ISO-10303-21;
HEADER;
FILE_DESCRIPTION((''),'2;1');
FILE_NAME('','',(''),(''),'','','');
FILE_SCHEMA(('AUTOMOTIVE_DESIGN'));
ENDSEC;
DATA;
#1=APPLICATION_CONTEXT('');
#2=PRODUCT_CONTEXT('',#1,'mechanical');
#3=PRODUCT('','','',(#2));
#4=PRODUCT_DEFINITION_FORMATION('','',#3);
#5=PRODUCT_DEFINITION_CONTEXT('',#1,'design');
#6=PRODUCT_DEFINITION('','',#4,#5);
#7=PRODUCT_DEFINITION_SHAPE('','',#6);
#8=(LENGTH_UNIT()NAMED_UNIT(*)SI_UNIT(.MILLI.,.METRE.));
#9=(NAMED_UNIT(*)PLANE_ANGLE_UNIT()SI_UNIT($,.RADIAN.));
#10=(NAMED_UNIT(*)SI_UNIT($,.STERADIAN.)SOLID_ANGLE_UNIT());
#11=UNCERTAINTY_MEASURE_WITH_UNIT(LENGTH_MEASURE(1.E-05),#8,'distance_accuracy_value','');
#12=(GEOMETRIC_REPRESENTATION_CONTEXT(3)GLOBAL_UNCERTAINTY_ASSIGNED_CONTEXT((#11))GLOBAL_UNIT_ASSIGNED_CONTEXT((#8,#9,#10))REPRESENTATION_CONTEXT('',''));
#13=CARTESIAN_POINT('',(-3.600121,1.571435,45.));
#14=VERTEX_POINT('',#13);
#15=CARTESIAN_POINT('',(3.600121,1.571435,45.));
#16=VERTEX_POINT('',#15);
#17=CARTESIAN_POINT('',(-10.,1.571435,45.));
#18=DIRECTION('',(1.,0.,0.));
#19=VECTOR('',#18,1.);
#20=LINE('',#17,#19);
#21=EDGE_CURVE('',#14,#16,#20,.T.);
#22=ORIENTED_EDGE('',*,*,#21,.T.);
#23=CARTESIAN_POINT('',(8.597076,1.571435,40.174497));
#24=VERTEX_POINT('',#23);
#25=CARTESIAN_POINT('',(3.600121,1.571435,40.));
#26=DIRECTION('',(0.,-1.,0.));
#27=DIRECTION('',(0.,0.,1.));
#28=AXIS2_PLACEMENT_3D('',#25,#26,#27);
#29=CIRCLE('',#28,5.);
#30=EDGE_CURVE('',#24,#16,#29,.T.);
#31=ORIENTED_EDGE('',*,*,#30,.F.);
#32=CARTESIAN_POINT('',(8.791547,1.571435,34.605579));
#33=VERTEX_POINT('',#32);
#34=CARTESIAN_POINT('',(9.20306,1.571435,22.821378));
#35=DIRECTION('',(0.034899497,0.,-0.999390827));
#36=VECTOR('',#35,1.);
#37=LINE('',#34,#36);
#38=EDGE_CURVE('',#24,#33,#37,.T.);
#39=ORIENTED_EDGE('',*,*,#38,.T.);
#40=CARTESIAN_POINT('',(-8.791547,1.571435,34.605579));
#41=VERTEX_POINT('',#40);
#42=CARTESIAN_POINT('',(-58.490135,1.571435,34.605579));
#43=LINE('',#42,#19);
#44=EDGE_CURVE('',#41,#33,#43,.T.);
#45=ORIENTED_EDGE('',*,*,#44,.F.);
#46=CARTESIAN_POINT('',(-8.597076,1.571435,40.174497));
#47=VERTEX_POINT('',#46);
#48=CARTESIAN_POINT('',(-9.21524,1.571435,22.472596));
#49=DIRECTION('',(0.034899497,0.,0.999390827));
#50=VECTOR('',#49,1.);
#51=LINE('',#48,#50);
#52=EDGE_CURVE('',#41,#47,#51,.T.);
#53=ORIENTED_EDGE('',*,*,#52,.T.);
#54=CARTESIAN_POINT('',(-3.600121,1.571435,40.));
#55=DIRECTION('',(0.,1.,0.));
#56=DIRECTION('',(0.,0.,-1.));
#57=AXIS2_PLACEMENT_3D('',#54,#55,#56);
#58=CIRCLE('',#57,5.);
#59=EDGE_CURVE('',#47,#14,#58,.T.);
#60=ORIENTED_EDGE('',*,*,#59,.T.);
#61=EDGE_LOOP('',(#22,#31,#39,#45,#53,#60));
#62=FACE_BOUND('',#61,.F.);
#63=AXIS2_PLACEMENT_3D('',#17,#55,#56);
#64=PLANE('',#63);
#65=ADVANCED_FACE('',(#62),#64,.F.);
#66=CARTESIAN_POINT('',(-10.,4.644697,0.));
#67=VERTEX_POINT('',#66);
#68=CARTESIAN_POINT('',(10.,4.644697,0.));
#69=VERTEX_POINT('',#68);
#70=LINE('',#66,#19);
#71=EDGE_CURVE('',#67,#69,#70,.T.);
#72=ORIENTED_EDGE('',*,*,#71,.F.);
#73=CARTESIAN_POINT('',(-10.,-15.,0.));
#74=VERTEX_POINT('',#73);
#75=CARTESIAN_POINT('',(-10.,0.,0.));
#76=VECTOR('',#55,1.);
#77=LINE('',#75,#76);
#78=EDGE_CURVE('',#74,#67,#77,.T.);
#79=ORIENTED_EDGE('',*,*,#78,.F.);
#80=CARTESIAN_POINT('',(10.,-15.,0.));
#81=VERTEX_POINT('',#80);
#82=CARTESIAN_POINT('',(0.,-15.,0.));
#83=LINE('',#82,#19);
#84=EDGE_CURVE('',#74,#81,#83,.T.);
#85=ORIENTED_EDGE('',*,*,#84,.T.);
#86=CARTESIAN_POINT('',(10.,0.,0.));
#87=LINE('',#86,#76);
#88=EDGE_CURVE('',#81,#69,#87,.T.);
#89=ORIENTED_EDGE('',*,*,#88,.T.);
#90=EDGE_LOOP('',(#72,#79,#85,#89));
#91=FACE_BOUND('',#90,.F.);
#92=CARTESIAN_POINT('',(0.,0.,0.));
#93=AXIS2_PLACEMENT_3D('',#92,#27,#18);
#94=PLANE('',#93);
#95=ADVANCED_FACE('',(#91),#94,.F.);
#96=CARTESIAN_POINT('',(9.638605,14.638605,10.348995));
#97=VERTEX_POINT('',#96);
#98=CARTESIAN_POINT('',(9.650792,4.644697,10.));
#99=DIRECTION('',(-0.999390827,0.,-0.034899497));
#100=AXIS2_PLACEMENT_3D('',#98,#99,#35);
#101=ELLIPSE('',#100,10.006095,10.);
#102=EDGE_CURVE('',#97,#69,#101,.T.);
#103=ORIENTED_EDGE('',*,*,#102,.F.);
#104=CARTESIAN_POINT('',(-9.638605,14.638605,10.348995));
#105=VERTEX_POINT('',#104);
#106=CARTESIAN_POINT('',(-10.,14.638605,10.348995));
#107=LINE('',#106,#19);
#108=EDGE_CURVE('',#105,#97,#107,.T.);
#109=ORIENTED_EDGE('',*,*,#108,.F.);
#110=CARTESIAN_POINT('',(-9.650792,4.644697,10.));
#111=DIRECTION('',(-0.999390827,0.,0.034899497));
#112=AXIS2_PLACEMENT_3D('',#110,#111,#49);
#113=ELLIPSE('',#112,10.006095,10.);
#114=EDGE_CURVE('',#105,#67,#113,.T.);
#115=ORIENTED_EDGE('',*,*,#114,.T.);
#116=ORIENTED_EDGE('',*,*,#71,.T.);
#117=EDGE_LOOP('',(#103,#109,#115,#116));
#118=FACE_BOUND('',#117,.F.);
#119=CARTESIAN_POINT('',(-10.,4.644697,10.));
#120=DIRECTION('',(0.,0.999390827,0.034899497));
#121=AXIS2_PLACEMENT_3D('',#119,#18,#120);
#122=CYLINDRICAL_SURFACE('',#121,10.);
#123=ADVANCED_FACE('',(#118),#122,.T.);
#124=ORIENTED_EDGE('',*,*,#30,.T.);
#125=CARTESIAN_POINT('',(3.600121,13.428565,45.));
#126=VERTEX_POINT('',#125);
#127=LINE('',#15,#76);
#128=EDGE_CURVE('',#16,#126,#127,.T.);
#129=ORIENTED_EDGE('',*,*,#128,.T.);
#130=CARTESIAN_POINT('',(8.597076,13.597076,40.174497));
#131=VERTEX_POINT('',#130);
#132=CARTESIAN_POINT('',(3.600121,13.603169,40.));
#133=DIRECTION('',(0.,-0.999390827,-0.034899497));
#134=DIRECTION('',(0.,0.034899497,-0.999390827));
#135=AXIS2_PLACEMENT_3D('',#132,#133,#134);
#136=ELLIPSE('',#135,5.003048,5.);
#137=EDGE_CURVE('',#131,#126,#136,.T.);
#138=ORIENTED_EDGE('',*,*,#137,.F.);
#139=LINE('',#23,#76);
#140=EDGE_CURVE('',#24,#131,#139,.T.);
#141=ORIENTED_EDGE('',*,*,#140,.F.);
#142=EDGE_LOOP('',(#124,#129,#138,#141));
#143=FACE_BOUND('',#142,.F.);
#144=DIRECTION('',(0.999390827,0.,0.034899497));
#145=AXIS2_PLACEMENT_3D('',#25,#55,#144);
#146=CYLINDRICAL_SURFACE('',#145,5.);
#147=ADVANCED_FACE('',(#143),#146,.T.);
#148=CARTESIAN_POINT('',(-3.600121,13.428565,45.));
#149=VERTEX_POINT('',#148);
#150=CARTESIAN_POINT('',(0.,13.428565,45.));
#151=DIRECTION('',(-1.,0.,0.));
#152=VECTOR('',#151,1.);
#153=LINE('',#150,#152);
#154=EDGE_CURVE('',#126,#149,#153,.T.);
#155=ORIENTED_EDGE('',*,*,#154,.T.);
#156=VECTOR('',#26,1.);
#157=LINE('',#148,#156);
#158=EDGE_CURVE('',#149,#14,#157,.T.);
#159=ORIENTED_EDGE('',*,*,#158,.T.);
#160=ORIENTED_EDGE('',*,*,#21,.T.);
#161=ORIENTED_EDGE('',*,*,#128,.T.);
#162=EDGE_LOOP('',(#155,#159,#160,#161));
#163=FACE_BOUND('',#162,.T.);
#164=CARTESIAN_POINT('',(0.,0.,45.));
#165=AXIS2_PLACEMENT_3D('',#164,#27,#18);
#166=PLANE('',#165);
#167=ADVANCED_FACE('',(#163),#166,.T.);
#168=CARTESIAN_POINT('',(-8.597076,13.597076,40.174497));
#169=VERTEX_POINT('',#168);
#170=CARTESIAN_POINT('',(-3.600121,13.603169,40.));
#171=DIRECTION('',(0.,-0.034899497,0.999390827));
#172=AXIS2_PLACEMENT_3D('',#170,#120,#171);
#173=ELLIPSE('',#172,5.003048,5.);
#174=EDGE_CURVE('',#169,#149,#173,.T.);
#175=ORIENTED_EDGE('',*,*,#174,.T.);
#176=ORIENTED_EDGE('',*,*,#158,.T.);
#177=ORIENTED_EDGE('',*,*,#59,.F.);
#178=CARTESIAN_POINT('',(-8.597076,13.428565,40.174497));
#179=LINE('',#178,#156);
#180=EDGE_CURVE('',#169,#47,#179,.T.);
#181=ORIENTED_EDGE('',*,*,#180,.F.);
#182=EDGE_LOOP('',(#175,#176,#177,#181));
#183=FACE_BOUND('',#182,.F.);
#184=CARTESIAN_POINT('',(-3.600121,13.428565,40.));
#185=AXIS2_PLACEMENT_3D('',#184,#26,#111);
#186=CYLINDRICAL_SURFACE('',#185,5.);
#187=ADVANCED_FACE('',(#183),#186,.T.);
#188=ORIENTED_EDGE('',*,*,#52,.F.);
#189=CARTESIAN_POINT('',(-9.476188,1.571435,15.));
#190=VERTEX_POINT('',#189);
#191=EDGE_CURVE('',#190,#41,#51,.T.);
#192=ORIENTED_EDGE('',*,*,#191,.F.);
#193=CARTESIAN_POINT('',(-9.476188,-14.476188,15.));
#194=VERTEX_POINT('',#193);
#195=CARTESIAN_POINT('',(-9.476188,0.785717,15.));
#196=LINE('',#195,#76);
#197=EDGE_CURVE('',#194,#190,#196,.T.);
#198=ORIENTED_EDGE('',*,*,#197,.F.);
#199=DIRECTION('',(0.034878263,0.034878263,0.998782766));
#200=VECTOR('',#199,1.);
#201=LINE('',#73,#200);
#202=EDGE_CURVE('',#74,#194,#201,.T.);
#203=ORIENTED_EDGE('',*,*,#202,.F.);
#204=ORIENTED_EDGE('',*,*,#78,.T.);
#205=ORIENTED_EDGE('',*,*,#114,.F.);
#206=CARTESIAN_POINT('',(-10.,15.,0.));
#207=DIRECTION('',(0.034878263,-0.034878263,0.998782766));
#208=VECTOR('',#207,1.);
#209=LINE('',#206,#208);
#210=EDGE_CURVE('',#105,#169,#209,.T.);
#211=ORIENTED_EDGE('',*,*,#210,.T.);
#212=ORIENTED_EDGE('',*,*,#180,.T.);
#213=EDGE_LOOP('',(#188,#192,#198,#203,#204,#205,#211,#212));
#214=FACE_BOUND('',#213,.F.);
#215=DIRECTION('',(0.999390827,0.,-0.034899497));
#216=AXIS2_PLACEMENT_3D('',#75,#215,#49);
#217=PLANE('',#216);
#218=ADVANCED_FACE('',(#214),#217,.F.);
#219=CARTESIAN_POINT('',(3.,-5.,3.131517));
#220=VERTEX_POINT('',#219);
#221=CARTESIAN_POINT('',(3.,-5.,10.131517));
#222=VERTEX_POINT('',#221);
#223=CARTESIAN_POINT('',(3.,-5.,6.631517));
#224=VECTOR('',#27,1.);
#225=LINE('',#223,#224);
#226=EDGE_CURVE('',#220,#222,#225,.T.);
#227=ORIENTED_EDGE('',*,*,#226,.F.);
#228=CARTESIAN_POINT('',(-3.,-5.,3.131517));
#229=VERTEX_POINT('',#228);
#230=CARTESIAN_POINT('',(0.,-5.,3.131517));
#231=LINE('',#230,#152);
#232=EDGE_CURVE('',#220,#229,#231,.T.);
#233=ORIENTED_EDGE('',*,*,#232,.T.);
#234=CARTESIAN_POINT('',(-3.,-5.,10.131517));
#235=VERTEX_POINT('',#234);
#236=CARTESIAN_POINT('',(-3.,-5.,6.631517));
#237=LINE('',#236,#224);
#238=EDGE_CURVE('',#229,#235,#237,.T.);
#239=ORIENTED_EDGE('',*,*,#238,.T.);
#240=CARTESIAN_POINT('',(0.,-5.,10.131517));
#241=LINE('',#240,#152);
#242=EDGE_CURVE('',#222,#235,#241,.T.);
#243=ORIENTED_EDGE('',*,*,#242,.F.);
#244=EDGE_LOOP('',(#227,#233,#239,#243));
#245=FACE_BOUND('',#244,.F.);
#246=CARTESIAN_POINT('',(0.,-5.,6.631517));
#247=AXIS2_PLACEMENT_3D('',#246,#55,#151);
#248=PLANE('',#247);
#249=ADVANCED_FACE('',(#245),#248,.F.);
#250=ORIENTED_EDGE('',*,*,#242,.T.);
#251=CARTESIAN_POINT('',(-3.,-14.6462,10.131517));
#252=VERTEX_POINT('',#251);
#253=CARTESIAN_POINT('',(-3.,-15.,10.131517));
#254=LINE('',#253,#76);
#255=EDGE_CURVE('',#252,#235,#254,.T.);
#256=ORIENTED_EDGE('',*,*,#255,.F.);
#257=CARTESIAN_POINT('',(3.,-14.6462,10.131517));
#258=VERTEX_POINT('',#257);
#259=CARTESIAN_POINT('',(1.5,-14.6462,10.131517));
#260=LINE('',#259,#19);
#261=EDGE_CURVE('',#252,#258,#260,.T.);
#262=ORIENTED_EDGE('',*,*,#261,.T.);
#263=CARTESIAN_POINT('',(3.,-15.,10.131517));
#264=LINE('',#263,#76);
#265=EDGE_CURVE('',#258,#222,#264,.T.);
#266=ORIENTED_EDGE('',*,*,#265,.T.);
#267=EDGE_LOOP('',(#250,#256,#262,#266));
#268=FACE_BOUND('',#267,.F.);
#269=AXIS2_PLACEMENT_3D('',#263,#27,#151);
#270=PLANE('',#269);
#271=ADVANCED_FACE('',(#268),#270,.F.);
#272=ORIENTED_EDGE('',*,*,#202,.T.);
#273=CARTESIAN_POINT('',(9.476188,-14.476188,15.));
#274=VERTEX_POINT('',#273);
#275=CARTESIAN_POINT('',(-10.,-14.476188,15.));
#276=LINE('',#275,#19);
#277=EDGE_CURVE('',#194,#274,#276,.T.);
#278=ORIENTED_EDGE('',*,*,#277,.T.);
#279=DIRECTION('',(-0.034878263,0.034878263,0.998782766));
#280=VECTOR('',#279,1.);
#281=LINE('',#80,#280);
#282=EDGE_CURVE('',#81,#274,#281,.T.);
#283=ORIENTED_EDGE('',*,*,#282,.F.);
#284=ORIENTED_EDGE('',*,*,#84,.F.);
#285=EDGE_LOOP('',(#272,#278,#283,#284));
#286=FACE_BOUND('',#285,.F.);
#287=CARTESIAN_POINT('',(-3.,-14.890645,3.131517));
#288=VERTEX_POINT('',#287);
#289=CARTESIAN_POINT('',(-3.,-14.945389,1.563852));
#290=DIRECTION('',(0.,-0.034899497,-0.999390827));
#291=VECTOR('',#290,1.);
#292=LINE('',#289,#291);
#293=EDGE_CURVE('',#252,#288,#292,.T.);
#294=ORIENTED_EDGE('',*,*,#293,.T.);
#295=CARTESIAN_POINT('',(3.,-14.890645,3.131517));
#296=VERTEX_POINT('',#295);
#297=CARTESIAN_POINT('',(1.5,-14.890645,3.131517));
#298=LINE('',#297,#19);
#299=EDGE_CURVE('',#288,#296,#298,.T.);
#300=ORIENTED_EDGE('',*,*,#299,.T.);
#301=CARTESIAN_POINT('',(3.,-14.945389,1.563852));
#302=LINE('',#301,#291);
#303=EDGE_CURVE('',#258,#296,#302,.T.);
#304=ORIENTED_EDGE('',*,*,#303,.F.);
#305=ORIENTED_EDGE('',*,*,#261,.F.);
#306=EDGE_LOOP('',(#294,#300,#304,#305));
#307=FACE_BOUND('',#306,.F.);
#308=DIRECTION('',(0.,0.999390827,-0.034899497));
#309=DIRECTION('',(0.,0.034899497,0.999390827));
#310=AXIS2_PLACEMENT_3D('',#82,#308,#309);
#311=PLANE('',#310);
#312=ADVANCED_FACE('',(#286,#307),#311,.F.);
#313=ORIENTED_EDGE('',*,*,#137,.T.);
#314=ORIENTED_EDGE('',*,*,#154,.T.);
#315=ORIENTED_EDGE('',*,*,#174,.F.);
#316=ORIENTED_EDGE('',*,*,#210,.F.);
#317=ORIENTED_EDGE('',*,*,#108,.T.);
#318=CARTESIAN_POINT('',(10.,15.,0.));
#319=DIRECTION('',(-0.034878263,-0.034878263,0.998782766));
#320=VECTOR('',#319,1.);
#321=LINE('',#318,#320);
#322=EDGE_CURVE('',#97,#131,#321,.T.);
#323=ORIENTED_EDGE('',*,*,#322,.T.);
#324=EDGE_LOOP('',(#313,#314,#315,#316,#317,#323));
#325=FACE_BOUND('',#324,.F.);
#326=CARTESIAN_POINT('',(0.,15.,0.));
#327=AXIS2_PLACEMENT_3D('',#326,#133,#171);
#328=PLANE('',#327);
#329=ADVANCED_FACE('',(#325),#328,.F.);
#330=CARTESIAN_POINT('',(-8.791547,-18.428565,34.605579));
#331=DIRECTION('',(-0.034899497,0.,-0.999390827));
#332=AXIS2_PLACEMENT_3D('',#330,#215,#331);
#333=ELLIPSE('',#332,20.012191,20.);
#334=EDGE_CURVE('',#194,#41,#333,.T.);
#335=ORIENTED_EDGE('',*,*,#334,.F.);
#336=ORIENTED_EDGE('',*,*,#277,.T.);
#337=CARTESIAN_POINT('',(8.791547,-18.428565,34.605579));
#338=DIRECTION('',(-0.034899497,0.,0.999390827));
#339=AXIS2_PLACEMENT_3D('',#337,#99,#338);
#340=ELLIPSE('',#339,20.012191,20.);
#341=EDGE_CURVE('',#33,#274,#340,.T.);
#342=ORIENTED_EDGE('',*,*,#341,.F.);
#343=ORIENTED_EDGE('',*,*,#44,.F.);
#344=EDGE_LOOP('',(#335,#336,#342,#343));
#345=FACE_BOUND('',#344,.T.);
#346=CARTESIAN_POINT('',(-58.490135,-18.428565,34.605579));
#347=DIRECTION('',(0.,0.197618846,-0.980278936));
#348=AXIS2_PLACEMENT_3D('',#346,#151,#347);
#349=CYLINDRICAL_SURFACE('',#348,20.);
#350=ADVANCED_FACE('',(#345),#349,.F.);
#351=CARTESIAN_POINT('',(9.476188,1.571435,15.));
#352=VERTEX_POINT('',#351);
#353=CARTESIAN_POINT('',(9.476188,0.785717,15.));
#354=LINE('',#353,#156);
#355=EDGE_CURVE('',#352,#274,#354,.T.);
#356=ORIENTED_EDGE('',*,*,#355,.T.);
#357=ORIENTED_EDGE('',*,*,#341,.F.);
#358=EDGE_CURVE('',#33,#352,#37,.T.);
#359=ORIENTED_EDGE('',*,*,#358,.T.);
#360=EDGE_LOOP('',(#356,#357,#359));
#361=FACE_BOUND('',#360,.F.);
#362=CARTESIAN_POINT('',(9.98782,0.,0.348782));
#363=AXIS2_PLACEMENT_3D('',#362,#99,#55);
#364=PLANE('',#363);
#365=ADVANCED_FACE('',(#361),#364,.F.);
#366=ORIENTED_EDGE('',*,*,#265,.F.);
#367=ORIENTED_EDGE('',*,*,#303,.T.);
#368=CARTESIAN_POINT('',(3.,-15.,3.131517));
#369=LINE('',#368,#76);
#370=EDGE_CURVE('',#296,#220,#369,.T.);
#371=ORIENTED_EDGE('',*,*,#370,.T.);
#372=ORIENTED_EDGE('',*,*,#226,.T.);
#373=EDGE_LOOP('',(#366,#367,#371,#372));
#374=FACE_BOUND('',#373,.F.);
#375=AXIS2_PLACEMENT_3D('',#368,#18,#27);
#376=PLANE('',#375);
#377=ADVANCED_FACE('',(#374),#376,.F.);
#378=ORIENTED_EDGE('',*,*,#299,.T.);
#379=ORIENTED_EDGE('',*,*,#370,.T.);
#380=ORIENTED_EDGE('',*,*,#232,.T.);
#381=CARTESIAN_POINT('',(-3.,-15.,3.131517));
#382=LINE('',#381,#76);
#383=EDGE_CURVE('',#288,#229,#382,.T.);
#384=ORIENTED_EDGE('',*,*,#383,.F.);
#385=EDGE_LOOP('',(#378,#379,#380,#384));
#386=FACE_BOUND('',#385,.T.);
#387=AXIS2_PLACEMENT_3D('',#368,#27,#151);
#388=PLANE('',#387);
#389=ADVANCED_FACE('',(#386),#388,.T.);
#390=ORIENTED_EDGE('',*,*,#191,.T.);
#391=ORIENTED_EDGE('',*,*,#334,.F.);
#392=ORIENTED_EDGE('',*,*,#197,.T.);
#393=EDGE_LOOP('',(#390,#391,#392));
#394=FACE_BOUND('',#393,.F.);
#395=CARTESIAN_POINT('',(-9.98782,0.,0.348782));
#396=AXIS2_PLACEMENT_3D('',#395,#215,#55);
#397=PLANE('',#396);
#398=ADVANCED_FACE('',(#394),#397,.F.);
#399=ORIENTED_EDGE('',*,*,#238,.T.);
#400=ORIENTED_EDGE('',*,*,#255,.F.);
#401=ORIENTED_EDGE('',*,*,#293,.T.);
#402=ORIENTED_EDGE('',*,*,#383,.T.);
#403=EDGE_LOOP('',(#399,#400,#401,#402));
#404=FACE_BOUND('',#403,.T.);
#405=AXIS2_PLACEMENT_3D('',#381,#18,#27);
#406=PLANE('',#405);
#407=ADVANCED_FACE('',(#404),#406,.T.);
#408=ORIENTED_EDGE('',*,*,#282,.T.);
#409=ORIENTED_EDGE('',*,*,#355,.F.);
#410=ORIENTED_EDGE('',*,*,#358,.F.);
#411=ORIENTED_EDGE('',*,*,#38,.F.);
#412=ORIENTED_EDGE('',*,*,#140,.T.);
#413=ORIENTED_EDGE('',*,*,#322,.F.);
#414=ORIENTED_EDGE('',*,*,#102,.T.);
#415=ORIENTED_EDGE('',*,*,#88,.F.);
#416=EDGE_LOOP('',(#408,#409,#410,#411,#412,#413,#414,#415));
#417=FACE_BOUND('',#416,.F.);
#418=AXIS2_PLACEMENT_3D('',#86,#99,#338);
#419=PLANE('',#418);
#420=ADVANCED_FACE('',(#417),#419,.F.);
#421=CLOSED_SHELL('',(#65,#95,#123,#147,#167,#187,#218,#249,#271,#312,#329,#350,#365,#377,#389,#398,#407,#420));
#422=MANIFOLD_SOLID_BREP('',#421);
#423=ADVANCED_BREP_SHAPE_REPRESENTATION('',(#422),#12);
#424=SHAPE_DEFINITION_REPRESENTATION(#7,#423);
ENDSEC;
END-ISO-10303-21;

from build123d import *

# Parameters (mm, degrees)
F0_W        = 20
F0_H        = 30
F1_DEPTH    = 45
F1_TAPER    = 2
F4_DEPTH    = 20.001
F5_T4_DEPTH = 116.9802704864
F7_W        = 6
F7_H        = 7
F8_DEPTH    = 10
F9_R        = 5
F10_R       = 10


# Not quite as in the source:
# - a fillet or chamfer that OpenCascade refuses, or shapes differently, is made with other operations: its cross-section is extruded or revolved along the edge and cut away or added


with BuildPart() as f1:
    # F0 (on Top) → F1 (new body)
    with BuildSketch(Plane.XY):
        Rectangle(F0_W, F0_H)
    extrude(amount=F1_DEPTH, taper=F1_TAPER)

    # F3 (on face) → F4 (cut, through all)
    with BuildSketch(Plane(origin=(-10, 0, 0), x_dir=(0, -1, 0), z_dir=(-1, 0, 0))):
        Polygon((14.4761884576, 15), (13.4285653729, 45), (-1.5714346271, 45), (-1.5714346271, 15), (13.4285653729, 15), align=None)
    extrude(amount=-F4_DEPTH, mode=Mode.SUBTRACT)

    # F5: fillet of radius 20 on 1 edges, made by hand


with BuildPart() as f5_tool2:
    # F5_s3 → F5_t4 (new body)
    with BuildSketch(Plane.YZ.offset(-58.4901352432)):
        with BuildLine():
            ThreePointArc((-14.4761884576, 15), (-2.9520099049, 21.9376573833), (1.5714346271, 34.6055787142))
            Line((1.5714346271, 34.6055787142), (1.5714346271, 15))
            Line((1.5714346271, 15), (-14.4761884576, 15))
        make_face()
    extrude(amount=F5_T4_DEPTH)

    split(bisect_by=Plane(origin=(-9.9878202513, 0, 0.3487823687), x_dir=(0, 1, 0), z_dir=(0.999390827, 0, -0.0348994967)), keep=Keep.TOP)

    split(bisect_by=Plane(origin=(9.9878202513, 0, 0.3487823687), x_dir=(0, 1, 0), z_dir=(-0.999390827, 0, -0.0348994967)), keep=Keep.TOP)


with BuildPart() as f1_1:
    add(f1.part)

    # F5_t1: union F5_tool2
    add(f5_tool2.part)

    # F7 (on face) → F8 (cut)
    with BuildSketch(Plane(origin=(0, -15, 0), x_dir=(-1, 0, 0), z_dir=(0, 1, 0))):
        with Locations((0, 6.6315173171)):
            Rectangle(F7_W, F7_H)
    extrude(amount=F8_DEPTH, mode=Mode.SUBTRACT)

    # F9
    f9_edges = [f1_1.edges().sort_by_distance(p)[0] for p in [
        (-8.428565, 7.5, 45),
        (8.428565, 7.5, 45),
    ]]
    fillet(f9_edges, radius=F9_R)

    # F10
    f10_edges = [f1_1.edges().sort_by_distance(p)[0] for p in [
        (0, 15, 0),
    ]]
    fillet(f10_edges, radius=F10_R)


solid = f1_1.part
